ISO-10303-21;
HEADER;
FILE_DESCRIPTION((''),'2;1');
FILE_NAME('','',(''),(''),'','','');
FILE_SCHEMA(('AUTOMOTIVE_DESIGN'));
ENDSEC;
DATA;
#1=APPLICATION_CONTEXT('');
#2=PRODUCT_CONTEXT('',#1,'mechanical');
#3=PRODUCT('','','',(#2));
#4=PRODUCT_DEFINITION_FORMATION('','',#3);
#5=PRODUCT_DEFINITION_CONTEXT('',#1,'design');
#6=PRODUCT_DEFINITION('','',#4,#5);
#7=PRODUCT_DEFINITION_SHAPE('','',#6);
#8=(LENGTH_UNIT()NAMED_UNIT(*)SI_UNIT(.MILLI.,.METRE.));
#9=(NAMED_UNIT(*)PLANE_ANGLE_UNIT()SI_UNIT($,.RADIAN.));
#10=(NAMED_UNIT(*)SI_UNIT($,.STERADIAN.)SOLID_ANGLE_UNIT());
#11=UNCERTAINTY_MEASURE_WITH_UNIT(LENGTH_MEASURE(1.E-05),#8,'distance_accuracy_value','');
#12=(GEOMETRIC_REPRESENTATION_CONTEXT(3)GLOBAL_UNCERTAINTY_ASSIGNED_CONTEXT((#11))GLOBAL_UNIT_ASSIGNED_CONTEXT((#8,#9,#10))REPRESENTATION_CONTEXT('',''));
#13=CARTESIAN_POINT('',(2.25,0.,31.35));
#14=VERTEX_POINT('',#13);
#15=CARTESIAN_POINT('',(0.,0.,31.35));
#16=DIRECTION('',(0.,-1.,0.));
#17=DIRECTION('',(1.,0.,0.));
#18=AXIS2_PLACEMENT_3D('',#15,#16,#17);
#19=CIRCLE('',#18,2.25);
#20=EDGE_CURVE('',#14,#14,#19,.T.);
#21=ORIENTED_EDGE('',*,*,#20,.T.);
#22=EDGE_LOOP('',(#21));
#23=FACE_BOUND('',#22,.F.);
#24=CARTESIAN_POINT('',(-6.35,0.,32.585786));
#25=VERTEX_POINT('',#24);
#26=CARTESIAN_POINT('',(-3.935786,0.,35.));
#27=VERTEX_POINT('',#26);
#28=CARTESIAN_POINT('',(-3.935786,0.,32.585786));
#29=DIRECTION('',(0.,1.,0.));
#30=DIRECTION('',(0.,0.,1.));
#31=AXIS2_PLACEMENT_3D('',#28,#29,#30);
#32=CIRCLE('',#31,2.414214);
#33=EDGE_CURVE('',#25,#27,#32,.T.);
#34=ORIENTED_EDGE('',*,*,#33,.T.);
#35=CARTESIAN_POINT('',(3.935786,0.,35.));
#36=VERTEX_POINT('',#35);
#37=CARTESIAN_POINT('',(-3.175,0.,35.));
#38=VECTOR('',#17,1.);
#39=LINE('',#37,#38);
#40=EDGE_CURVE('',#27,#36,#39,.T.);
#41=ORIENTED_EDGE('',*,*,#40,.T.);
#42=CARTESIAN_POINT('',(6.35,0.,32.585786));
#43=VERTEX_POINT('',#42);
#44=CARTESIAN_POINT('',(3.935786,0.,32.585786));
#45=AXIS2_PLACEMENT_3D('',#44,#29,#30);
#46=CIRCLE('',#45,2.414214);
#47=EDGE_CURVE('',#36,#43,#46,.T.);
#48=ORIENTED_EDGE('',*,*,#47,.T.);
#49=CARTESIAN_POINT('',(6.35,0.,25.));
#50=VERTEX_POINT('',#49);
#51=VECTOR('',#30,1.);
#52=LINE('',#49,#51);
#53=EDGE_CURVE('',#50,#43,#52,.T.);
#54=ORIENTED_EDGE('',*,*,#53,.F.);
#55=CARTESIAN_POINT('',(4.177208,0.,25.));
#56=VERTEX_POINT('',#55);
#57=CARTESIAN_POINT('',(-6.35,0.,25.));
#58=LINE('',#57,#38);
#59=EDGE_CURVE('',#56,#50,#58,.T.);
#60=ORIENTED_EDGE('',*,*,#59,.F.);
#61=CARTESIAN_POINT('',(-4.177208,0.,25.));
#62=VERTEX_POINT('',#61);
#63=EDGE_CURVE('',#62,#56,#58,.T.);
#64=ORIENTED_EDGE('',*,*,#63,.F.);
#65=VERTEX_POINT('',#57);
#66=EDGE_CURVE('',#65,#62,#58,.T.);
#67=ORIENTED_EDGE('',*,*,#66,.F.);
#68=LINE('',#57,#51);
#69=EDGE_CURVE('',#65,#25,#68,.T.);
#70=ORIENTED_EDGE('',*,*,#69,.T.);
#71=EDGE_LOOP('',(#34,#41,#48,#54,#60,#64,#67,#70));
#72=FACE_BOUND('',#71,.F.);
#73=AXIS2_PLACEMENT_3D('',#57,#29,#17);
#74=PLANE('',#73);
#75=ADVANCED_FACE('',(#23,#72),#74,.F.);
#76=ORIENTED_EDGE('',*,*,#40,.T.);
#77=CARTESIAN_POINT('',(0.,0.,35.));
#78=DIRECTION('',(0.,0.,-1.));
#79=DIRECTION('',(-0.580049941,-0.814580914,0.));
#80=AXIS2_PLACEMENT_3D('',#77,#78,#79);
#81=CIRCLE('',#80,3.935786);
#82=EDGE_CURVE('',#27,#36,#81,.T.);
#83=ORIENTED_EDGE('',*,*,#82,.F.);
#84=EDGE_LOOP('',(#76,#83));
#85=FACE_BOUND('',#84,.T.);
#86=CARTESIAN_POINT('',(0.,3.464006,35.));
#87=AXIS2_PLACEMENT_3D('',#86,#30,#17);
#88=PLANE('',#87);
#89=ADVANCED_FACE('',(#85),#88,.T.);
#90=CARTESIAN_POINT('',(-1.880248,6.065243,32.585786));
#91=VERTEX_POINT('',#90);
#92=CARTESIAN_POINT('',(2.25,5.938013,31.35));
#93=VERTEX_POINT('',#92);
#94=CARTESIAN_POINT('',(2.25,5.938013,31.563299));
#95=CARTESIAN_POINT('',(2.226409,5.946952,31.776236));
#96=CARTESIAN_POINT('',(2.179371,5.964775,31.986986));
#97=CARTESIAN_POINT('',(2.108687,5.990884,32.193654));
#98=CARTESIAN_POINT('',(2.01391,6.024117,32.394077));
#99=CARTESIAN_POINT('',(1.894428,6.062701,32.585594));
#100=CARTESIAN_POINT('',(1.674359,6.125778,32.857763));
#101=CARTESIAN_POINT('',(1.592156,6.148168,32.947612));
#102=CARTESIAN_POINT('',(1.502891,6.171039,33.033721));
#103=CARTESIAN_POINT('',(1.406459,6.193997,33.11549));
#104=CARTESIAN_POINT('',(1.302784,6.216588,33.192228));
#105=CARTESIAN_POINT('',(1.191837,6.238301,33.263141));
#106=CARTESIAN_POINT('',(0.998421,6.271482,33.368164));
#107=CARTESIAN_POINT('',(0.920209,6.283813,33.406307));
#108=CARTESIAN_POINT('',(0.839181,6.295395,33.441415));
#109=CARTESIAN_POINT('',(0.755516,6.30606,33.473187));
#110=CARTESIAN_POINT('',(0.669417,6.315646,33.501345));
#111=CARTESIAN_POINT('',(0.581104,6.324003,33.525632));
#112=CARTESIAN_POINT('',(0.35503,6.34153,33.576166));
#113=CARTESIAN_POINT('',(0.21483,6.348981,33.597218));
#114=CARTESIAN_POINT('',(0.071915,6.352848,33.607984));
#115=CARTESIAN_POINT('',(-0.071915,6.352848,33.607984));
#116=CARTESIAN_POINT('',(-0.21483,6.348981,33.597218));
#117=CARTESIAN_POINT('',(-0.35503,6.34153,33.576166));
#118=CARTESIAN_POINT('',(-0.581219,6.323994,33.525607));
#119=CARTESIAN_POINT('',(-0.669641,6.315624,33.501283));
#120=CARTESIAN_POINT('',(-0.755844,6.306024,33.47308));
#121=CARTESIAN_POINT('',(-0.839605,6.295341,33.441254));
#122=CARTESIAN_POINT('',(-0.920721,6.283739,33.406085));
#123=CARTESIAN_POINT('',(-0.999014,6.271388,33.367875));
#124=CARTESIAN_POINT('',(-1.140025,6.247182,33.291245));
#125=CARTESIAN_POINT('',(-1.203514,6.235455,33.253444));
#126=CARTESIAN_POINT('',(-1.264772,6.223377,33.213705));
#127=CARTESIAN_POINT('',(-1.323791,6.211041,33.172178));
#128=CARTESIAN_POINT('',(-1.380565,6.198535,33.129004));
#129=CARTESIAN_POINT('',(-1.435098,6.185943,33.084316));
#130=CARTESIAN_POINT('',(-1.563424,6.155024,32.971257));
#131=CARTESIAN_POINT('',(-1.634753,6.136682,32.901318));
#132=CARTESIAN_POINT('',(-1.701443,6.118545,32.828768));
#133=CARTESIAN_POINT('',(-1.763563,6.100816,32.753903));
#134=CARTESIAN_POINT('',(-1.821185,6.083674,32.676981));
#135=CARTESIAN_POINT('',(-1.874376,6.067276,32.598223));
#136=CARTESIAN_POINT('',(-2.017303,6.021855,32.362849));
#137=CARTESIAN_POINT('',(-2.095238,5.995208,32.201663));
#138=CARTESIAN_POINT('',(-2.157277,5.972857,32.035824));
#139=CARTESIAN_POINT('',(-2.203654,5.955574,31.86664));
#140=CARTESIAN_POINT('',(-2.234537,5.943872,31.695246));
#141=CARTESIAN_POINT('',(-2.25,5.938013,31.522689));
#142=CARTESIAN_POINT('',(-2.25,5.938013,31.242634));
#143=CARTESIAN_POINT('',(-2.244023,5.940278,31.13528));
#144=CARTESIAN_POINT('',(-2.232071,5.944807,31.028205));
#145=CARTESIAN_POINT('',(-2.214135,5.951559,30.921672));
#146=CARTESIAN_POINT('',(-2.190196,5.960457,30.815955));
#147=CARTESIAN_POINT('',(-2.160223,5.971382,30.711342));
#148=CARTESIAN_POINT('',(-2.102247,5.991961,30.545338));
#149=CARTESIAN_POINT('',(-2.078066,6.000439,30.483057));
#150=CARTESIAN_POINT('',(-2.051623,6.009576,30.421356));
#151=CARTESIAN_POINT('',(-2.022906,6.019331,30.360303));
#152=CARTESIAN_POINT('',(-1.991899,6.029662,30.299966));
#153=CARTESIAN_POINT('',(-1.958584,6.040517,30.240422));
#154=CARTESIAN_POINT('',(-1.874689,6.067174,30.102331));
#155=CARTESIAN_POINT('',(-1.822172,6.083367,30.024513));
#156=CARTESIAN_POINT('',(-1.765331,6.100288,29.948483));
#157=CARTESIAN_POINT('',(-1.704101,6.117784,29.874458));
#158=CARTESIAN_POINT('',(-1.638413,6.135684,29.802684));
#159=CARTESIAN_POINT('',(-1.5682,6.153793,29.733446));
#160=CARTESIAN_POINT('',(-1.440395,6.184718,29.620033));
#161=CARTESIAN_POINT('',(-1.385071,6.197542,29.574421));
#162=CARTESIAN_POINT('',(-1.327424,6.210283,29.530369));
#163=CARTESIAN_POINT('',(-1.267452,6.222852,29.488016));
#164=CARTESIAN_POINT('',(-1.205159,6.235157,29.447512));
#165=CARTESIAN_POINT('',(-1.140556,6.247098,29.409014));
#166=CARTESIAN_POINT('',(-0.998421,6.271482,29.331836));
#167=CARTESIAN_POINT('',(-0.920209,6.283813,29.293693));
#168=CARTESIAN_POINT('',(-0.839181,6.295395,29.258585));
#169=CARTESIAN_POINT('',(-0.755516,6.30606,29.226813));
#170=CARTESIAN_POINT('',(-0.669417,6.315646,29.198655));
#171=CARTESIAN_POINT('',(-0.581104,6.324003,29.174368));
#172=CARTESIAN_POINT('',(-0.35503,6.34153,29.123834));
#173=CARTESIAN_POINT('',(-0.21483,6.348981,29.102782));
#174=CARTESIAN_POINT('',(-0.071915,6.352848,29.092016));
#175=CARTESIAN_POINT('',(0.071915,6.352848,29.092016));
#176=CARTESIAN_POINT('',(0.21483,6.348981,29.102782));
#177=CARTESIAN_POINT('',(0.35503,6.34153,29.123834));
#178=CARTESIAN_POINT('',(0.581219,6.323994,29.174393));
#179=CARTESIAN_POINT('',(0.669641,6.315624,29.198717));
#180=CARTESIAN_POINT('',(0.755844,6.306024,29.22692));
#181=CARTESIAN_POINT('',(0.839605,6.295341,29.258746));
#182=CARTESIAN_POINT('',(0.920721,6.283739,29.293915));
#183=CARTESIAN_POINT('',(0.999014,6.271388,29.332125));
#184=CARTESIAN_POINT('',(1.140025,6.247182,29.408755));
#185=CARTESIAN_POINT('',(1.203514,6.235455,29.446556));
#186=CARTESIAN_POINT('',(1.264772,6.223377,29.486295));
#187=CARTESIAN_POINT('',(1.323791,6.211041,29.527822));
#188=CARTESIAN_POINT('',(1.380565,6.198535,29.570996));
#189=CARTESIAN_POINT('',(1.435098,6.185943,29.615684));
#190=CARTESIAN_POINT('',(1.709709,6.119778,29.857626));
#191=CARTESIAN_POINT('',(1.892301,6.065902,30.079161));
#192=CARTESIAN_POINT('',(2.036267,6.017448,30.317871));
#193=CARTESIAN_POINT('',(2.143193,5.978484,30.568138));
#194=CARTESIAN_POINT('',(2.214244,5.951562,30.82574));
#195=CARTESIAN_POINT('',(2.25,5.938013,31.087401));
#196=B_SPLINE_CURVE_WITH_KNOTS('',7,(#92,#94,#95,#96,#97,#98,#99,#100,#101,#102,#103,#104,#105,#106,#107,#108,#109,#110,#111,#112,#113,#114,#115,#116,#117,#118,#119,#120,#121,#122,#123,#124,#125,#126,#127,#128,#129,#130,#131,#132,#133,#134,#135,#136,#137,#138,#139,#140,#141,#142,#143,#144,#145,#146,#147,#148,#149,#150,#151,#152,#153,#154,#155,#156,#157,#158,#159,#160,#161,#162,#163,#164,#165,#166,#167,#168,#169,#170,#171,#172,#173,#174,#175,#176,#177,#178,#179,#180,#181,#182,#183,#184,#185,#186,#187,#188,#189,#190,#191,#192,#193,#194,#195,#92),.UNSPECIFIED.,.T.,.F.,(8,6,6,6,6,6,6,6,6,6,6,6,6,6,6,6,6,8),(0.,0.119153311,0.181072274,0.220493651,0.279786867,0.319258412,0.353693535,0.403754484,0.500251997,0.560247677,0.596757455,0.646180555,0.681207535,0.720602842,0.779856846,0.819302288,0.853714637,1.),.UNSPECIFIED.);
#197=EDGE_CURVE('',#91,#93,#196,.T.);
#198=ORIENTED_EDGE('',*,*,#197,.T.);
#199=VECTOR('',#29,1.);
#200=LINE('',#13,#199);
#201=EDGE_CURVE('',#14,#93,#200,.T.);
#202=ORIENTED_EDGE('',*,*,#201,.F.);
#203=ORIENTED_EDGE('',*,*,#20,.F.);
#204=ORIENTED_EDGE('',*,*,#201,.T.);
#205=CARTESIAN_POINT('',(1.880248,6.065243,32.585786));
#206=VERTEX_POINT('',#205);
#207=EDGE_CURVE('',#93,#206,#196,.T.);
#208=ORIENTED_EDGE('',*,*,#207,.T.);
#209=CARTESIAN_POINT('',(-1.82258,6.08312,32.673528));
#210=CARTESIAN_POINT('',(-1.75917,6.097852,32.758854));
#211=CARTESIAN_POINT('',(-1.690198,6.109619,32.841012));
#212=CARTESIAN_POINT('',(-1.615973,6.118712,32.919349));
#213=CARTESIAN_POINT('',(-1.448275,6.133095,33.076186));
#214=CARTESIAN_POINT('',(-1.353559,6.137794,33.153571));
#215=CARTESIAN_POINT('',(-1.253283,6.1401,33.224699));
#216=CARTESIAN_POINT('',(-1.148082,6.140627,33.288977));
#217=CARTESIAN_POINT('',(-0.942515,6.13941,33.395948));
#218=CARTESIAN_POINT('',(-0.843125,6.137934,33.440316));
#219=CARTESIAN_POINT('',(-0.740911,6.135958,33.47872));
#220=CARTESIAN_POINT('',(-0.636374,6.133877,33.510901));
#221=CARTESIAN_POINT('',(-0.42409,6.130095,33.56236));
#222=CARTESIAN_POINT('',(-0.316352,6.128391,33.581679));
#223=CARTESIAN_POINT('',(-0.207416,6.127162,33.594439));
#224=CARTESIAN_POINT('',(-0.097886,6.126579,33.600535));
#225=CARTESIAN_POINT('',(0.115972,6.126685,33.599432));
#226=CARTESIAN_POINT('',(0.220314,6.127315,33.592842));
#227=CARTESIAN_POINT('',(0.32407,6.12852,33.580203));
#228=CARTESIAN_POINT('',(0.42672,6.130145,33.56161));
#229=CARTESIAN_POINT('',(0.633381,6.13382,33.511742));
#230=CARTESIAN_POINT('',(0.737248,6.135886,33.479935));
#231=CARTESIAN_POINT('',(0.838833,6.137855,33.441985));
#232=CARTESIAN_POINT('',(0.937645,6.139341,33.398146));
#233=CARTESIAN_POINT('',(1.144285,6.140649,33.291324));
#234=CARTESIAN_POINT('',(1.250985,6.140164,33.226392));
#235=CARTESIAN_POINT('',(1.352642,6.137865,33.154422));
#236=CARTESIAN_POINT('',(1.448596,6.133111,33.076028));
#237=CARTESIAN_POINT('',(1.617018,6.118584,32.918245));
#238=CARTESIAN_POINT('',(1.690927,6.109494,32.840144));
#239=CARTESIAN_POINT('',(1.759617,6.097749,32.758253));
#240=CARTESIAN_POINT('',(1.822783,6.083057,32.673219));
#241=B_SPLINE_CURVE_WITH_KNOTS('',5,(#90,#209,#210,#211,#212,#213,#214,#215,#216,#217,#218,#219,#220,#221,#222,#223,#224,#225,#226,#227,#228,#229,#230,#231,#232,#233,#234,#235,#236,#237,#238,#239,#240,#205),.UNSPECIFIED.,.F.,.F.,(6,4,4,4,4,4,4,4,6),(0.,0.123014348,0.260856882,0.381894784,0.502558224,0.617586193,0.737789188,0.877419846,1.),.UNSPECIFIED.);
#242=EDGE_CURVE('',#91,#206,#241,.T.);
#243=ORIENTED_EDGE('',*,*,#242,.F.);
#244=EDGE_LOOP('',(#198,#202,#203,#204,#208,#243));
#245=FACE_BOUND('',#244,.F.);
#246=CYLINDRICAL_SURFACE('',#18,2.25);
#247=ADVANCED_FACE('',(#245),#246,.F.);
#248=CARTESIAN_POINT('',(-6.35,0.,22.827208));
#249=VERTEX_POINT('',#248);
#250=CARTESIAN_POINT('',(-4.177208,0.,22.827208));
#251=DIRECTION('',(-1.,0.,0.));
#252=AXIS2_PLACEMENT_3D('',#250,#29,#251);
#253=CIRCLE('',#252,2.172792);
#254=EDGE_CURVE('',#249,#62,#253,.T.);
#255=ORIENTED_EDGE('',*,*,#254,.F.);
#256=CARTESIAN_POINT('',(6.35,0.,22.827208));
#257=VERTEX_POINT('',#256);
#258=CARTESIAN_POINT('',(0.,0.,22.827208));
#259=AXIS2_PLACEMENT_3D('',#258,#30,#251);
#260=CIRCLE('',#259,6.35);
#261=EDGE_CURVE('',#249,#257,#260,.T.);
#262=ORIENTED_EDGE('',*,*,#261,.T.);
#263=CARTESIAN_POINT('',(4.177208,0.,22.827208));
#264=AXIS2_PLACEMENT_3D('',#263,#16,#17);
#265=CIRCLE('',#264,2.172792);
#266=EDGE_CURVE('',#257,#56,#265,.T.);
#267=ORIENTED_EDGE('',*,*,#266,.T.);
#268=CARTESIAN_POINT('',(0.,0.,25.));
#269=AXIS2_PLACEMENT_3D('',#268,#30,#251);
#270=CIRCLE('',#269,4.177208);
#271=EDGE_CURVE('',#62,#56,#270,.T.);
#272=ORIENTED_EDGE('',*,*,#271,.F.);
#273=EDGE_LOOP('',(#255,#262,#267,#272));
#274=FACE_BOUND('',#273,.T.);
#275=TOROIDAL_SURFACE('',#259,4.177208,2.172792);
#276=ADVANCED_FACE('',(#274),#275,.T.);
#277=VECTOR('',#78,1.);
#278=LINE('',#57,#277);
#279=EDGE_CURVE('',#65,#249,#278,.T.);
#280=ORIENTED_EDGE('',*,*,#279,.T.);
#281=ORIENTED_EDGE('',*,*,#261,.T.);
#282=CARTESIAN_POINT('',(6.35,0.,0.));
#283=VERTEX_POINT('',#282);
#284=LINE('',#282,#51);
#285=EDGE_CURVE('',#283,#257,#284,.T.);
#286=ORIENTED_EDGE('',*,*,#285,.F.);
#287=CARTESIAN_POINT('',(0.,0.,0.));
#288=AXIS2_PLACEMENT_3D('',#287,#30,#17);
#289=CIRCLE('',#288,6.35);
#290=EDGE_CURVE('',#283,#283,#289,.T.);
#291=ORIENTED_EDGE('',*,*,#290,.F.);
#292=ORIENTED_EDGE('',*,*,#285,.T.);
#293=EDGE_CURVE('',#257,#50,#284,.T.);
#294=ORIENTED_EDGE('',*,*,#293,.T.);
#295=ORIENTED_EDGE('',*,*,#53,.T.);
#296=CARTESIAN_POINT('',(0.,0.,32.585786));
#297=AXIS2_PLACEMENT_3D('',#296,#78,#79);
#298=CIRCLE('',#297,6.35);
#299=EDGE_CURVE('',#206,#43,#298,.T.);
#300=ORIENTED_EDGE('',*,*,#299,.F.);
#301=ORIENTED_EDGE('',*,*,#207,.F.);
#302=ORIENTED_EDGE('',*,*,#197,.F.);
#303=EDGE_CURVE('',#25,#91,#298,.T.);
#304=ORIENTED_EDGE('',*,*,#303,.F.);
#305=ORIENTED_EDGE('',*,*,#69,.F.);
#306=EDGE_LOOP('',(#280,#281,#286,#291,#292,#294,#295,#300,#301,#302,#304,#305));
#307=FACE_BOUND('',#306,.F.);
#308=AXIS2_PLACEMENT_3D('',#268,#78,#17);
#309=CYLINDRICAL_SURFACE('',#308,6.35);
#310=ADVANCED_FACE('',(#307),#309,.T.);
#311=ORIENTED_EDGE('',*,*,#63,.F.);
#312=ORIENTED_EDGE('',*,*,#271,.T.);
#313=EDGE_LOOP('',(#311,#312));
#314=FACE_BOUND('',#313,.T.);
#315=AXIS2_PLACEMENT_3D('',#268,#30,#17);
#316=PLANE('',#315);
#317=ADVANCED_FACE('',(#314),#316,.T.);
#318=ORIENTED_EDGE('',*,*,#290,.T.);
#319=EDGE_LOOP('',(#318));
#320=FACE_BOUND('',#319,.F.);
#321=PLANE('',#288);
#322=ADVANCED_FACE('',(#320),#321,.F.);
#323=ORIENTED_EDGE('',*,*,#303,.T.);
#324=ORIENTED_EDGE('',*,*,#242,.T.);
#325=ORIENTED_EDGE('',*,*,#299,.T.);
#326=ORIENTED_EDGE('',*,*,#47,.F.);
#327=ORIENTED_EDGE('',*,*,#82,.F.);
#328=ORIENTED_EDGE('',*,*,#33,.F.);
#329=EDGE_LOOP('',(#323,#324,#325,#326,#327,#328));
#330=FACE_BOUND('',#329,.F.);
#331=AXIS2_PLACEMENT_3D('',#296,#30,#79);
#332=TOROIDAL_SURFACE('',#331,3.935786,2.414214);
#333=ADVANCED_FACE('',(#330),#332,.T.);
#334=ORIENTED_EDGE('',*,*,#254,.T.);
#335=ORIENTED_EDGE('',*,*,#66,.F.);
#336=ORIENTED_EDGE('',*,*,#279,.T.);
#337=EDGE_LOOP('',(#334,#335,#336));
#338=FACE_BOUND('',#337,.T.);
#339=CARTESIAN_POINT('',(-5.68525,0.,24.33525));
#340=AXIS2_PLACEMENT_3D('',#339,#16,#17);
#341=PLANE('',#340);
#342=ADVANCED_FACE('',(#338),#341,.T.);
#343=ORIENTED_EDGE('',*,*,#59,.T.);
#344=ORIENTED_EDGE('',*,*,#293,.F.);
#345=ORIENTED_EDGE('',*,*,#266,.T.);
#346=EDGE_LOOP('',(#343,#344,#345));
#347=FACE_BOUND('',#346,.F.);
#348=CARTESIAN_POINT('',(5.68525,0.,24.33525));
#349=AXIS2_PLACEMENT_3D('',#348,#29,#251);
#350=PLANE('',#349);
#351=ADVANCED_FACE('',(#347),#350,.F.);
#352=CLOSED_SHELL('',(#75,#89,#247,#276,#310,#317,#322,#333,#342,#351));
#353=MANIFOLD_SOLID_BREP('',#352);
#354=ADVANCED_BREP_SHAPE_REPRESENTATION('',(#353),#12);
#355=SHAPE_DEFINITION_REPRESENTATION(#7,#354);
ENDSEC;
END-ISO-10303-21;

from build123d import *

# Parameters (mm, degrees)
F0_R        = 6.35
F1_DEPTH    = 25
F3_DEPTH    = 12.7
F4_R        = 2.25
F5_DEPTH    = 25
F6_W        = 18.3003712445
F6_H        = 9.7342398949
F7_DEPTH    = 2.7
F8_T2_ANGLE = 289.0918893802
F9_T2_ANGLE = 180


# Not quite as in the source:
# - a fillet or chamfer that OpenCascade refuses, or shapes differently, is made with other operations: its cross-section is extruded or revolved along the edge and cut away or added


with BuildPart() as f1:
    # F0 (on Top) → F1 (new body)
    with BuildSketch(Plane.XY):
        Circle(F0_R)
    extrude(amount=F1_DEPTH)

    # F2 (on face) → F3 (join)
    with BuildSketch(Plane.XY.offset(25)):
        with BuildLine():
            Line((-6.35, 0), (6.35, 0))
            ThreePointArc((6.35, 0), (0, 6.35), (-6.35, 0))
        make_face()
    extrude(amount=F3_DEPTH)

    # F4 (on face) → F5 (cut)
    with BuildSketch(Plane.XZ):
        with Locations((0, 31.35)):
            Circle(F4_R)
    extrude(amount=-F5_DEPTH, mode=Mode.SUBTRACT)

    # F6 (on face) → F7 (cut)
    with BuildSketch(Plane.XY.offset(37.7)):
        with Locations((0, 3.4640058875)):
            Rectangle(F6_W, F6_H)
    extrude(amount=-F7_DEPTH, mode=Mode.SUBTRACT)

    # F8: fillet of radius 2.4142135624 on 1 edges, made by hand

    # F8_s1 → F8_t2 (revolve, cut)
    with BuildSketch(Plane(origin=(0, 0, 0), x_dir=(0, 0, 1), z_dir=(0.8145809142, -0.5800499411, 0))):
        with BuildLine():
            ThreePointArc((32.5857864376, 6.35), (34.2928932188, 5.6428932188), (35, 3.9357864376))
            Line((35, 3.9357864376), (35, 6.35))
            Line((35, 6.35), (32.5857864376, 6.35))
        make_face()
    revolve(axis=Axis((0, 0, 35), (0, 0, -1)), revolution_arc=F8_T2_ANGLE, mode=Mode.SUBTRACT)

    # F9: fillet of radius 2.1727922061 on 1 edges, made by hand

    # F9_s1 → F9_t2 (revolve, cut)
    with BuildSketch(Plane.XZ):
        with BuildLine():
            ThreePointArc((-6.35, 22.8272077939), (-5.7136038969, 24.3636038969), (-4.1772077939, 25))
            Line((-4.1772077939, 25), (-6.35, 25))
            Line((-6.35, 25), (-6.35, 22.8272077939))
        make_face()
    revolve(axis=Axis((0, 0, 25), (0, 0, 1)), revolution_arc=F9_T2_ANGLE, mode=Mode.SUBTRACT)


solid = f1.part
